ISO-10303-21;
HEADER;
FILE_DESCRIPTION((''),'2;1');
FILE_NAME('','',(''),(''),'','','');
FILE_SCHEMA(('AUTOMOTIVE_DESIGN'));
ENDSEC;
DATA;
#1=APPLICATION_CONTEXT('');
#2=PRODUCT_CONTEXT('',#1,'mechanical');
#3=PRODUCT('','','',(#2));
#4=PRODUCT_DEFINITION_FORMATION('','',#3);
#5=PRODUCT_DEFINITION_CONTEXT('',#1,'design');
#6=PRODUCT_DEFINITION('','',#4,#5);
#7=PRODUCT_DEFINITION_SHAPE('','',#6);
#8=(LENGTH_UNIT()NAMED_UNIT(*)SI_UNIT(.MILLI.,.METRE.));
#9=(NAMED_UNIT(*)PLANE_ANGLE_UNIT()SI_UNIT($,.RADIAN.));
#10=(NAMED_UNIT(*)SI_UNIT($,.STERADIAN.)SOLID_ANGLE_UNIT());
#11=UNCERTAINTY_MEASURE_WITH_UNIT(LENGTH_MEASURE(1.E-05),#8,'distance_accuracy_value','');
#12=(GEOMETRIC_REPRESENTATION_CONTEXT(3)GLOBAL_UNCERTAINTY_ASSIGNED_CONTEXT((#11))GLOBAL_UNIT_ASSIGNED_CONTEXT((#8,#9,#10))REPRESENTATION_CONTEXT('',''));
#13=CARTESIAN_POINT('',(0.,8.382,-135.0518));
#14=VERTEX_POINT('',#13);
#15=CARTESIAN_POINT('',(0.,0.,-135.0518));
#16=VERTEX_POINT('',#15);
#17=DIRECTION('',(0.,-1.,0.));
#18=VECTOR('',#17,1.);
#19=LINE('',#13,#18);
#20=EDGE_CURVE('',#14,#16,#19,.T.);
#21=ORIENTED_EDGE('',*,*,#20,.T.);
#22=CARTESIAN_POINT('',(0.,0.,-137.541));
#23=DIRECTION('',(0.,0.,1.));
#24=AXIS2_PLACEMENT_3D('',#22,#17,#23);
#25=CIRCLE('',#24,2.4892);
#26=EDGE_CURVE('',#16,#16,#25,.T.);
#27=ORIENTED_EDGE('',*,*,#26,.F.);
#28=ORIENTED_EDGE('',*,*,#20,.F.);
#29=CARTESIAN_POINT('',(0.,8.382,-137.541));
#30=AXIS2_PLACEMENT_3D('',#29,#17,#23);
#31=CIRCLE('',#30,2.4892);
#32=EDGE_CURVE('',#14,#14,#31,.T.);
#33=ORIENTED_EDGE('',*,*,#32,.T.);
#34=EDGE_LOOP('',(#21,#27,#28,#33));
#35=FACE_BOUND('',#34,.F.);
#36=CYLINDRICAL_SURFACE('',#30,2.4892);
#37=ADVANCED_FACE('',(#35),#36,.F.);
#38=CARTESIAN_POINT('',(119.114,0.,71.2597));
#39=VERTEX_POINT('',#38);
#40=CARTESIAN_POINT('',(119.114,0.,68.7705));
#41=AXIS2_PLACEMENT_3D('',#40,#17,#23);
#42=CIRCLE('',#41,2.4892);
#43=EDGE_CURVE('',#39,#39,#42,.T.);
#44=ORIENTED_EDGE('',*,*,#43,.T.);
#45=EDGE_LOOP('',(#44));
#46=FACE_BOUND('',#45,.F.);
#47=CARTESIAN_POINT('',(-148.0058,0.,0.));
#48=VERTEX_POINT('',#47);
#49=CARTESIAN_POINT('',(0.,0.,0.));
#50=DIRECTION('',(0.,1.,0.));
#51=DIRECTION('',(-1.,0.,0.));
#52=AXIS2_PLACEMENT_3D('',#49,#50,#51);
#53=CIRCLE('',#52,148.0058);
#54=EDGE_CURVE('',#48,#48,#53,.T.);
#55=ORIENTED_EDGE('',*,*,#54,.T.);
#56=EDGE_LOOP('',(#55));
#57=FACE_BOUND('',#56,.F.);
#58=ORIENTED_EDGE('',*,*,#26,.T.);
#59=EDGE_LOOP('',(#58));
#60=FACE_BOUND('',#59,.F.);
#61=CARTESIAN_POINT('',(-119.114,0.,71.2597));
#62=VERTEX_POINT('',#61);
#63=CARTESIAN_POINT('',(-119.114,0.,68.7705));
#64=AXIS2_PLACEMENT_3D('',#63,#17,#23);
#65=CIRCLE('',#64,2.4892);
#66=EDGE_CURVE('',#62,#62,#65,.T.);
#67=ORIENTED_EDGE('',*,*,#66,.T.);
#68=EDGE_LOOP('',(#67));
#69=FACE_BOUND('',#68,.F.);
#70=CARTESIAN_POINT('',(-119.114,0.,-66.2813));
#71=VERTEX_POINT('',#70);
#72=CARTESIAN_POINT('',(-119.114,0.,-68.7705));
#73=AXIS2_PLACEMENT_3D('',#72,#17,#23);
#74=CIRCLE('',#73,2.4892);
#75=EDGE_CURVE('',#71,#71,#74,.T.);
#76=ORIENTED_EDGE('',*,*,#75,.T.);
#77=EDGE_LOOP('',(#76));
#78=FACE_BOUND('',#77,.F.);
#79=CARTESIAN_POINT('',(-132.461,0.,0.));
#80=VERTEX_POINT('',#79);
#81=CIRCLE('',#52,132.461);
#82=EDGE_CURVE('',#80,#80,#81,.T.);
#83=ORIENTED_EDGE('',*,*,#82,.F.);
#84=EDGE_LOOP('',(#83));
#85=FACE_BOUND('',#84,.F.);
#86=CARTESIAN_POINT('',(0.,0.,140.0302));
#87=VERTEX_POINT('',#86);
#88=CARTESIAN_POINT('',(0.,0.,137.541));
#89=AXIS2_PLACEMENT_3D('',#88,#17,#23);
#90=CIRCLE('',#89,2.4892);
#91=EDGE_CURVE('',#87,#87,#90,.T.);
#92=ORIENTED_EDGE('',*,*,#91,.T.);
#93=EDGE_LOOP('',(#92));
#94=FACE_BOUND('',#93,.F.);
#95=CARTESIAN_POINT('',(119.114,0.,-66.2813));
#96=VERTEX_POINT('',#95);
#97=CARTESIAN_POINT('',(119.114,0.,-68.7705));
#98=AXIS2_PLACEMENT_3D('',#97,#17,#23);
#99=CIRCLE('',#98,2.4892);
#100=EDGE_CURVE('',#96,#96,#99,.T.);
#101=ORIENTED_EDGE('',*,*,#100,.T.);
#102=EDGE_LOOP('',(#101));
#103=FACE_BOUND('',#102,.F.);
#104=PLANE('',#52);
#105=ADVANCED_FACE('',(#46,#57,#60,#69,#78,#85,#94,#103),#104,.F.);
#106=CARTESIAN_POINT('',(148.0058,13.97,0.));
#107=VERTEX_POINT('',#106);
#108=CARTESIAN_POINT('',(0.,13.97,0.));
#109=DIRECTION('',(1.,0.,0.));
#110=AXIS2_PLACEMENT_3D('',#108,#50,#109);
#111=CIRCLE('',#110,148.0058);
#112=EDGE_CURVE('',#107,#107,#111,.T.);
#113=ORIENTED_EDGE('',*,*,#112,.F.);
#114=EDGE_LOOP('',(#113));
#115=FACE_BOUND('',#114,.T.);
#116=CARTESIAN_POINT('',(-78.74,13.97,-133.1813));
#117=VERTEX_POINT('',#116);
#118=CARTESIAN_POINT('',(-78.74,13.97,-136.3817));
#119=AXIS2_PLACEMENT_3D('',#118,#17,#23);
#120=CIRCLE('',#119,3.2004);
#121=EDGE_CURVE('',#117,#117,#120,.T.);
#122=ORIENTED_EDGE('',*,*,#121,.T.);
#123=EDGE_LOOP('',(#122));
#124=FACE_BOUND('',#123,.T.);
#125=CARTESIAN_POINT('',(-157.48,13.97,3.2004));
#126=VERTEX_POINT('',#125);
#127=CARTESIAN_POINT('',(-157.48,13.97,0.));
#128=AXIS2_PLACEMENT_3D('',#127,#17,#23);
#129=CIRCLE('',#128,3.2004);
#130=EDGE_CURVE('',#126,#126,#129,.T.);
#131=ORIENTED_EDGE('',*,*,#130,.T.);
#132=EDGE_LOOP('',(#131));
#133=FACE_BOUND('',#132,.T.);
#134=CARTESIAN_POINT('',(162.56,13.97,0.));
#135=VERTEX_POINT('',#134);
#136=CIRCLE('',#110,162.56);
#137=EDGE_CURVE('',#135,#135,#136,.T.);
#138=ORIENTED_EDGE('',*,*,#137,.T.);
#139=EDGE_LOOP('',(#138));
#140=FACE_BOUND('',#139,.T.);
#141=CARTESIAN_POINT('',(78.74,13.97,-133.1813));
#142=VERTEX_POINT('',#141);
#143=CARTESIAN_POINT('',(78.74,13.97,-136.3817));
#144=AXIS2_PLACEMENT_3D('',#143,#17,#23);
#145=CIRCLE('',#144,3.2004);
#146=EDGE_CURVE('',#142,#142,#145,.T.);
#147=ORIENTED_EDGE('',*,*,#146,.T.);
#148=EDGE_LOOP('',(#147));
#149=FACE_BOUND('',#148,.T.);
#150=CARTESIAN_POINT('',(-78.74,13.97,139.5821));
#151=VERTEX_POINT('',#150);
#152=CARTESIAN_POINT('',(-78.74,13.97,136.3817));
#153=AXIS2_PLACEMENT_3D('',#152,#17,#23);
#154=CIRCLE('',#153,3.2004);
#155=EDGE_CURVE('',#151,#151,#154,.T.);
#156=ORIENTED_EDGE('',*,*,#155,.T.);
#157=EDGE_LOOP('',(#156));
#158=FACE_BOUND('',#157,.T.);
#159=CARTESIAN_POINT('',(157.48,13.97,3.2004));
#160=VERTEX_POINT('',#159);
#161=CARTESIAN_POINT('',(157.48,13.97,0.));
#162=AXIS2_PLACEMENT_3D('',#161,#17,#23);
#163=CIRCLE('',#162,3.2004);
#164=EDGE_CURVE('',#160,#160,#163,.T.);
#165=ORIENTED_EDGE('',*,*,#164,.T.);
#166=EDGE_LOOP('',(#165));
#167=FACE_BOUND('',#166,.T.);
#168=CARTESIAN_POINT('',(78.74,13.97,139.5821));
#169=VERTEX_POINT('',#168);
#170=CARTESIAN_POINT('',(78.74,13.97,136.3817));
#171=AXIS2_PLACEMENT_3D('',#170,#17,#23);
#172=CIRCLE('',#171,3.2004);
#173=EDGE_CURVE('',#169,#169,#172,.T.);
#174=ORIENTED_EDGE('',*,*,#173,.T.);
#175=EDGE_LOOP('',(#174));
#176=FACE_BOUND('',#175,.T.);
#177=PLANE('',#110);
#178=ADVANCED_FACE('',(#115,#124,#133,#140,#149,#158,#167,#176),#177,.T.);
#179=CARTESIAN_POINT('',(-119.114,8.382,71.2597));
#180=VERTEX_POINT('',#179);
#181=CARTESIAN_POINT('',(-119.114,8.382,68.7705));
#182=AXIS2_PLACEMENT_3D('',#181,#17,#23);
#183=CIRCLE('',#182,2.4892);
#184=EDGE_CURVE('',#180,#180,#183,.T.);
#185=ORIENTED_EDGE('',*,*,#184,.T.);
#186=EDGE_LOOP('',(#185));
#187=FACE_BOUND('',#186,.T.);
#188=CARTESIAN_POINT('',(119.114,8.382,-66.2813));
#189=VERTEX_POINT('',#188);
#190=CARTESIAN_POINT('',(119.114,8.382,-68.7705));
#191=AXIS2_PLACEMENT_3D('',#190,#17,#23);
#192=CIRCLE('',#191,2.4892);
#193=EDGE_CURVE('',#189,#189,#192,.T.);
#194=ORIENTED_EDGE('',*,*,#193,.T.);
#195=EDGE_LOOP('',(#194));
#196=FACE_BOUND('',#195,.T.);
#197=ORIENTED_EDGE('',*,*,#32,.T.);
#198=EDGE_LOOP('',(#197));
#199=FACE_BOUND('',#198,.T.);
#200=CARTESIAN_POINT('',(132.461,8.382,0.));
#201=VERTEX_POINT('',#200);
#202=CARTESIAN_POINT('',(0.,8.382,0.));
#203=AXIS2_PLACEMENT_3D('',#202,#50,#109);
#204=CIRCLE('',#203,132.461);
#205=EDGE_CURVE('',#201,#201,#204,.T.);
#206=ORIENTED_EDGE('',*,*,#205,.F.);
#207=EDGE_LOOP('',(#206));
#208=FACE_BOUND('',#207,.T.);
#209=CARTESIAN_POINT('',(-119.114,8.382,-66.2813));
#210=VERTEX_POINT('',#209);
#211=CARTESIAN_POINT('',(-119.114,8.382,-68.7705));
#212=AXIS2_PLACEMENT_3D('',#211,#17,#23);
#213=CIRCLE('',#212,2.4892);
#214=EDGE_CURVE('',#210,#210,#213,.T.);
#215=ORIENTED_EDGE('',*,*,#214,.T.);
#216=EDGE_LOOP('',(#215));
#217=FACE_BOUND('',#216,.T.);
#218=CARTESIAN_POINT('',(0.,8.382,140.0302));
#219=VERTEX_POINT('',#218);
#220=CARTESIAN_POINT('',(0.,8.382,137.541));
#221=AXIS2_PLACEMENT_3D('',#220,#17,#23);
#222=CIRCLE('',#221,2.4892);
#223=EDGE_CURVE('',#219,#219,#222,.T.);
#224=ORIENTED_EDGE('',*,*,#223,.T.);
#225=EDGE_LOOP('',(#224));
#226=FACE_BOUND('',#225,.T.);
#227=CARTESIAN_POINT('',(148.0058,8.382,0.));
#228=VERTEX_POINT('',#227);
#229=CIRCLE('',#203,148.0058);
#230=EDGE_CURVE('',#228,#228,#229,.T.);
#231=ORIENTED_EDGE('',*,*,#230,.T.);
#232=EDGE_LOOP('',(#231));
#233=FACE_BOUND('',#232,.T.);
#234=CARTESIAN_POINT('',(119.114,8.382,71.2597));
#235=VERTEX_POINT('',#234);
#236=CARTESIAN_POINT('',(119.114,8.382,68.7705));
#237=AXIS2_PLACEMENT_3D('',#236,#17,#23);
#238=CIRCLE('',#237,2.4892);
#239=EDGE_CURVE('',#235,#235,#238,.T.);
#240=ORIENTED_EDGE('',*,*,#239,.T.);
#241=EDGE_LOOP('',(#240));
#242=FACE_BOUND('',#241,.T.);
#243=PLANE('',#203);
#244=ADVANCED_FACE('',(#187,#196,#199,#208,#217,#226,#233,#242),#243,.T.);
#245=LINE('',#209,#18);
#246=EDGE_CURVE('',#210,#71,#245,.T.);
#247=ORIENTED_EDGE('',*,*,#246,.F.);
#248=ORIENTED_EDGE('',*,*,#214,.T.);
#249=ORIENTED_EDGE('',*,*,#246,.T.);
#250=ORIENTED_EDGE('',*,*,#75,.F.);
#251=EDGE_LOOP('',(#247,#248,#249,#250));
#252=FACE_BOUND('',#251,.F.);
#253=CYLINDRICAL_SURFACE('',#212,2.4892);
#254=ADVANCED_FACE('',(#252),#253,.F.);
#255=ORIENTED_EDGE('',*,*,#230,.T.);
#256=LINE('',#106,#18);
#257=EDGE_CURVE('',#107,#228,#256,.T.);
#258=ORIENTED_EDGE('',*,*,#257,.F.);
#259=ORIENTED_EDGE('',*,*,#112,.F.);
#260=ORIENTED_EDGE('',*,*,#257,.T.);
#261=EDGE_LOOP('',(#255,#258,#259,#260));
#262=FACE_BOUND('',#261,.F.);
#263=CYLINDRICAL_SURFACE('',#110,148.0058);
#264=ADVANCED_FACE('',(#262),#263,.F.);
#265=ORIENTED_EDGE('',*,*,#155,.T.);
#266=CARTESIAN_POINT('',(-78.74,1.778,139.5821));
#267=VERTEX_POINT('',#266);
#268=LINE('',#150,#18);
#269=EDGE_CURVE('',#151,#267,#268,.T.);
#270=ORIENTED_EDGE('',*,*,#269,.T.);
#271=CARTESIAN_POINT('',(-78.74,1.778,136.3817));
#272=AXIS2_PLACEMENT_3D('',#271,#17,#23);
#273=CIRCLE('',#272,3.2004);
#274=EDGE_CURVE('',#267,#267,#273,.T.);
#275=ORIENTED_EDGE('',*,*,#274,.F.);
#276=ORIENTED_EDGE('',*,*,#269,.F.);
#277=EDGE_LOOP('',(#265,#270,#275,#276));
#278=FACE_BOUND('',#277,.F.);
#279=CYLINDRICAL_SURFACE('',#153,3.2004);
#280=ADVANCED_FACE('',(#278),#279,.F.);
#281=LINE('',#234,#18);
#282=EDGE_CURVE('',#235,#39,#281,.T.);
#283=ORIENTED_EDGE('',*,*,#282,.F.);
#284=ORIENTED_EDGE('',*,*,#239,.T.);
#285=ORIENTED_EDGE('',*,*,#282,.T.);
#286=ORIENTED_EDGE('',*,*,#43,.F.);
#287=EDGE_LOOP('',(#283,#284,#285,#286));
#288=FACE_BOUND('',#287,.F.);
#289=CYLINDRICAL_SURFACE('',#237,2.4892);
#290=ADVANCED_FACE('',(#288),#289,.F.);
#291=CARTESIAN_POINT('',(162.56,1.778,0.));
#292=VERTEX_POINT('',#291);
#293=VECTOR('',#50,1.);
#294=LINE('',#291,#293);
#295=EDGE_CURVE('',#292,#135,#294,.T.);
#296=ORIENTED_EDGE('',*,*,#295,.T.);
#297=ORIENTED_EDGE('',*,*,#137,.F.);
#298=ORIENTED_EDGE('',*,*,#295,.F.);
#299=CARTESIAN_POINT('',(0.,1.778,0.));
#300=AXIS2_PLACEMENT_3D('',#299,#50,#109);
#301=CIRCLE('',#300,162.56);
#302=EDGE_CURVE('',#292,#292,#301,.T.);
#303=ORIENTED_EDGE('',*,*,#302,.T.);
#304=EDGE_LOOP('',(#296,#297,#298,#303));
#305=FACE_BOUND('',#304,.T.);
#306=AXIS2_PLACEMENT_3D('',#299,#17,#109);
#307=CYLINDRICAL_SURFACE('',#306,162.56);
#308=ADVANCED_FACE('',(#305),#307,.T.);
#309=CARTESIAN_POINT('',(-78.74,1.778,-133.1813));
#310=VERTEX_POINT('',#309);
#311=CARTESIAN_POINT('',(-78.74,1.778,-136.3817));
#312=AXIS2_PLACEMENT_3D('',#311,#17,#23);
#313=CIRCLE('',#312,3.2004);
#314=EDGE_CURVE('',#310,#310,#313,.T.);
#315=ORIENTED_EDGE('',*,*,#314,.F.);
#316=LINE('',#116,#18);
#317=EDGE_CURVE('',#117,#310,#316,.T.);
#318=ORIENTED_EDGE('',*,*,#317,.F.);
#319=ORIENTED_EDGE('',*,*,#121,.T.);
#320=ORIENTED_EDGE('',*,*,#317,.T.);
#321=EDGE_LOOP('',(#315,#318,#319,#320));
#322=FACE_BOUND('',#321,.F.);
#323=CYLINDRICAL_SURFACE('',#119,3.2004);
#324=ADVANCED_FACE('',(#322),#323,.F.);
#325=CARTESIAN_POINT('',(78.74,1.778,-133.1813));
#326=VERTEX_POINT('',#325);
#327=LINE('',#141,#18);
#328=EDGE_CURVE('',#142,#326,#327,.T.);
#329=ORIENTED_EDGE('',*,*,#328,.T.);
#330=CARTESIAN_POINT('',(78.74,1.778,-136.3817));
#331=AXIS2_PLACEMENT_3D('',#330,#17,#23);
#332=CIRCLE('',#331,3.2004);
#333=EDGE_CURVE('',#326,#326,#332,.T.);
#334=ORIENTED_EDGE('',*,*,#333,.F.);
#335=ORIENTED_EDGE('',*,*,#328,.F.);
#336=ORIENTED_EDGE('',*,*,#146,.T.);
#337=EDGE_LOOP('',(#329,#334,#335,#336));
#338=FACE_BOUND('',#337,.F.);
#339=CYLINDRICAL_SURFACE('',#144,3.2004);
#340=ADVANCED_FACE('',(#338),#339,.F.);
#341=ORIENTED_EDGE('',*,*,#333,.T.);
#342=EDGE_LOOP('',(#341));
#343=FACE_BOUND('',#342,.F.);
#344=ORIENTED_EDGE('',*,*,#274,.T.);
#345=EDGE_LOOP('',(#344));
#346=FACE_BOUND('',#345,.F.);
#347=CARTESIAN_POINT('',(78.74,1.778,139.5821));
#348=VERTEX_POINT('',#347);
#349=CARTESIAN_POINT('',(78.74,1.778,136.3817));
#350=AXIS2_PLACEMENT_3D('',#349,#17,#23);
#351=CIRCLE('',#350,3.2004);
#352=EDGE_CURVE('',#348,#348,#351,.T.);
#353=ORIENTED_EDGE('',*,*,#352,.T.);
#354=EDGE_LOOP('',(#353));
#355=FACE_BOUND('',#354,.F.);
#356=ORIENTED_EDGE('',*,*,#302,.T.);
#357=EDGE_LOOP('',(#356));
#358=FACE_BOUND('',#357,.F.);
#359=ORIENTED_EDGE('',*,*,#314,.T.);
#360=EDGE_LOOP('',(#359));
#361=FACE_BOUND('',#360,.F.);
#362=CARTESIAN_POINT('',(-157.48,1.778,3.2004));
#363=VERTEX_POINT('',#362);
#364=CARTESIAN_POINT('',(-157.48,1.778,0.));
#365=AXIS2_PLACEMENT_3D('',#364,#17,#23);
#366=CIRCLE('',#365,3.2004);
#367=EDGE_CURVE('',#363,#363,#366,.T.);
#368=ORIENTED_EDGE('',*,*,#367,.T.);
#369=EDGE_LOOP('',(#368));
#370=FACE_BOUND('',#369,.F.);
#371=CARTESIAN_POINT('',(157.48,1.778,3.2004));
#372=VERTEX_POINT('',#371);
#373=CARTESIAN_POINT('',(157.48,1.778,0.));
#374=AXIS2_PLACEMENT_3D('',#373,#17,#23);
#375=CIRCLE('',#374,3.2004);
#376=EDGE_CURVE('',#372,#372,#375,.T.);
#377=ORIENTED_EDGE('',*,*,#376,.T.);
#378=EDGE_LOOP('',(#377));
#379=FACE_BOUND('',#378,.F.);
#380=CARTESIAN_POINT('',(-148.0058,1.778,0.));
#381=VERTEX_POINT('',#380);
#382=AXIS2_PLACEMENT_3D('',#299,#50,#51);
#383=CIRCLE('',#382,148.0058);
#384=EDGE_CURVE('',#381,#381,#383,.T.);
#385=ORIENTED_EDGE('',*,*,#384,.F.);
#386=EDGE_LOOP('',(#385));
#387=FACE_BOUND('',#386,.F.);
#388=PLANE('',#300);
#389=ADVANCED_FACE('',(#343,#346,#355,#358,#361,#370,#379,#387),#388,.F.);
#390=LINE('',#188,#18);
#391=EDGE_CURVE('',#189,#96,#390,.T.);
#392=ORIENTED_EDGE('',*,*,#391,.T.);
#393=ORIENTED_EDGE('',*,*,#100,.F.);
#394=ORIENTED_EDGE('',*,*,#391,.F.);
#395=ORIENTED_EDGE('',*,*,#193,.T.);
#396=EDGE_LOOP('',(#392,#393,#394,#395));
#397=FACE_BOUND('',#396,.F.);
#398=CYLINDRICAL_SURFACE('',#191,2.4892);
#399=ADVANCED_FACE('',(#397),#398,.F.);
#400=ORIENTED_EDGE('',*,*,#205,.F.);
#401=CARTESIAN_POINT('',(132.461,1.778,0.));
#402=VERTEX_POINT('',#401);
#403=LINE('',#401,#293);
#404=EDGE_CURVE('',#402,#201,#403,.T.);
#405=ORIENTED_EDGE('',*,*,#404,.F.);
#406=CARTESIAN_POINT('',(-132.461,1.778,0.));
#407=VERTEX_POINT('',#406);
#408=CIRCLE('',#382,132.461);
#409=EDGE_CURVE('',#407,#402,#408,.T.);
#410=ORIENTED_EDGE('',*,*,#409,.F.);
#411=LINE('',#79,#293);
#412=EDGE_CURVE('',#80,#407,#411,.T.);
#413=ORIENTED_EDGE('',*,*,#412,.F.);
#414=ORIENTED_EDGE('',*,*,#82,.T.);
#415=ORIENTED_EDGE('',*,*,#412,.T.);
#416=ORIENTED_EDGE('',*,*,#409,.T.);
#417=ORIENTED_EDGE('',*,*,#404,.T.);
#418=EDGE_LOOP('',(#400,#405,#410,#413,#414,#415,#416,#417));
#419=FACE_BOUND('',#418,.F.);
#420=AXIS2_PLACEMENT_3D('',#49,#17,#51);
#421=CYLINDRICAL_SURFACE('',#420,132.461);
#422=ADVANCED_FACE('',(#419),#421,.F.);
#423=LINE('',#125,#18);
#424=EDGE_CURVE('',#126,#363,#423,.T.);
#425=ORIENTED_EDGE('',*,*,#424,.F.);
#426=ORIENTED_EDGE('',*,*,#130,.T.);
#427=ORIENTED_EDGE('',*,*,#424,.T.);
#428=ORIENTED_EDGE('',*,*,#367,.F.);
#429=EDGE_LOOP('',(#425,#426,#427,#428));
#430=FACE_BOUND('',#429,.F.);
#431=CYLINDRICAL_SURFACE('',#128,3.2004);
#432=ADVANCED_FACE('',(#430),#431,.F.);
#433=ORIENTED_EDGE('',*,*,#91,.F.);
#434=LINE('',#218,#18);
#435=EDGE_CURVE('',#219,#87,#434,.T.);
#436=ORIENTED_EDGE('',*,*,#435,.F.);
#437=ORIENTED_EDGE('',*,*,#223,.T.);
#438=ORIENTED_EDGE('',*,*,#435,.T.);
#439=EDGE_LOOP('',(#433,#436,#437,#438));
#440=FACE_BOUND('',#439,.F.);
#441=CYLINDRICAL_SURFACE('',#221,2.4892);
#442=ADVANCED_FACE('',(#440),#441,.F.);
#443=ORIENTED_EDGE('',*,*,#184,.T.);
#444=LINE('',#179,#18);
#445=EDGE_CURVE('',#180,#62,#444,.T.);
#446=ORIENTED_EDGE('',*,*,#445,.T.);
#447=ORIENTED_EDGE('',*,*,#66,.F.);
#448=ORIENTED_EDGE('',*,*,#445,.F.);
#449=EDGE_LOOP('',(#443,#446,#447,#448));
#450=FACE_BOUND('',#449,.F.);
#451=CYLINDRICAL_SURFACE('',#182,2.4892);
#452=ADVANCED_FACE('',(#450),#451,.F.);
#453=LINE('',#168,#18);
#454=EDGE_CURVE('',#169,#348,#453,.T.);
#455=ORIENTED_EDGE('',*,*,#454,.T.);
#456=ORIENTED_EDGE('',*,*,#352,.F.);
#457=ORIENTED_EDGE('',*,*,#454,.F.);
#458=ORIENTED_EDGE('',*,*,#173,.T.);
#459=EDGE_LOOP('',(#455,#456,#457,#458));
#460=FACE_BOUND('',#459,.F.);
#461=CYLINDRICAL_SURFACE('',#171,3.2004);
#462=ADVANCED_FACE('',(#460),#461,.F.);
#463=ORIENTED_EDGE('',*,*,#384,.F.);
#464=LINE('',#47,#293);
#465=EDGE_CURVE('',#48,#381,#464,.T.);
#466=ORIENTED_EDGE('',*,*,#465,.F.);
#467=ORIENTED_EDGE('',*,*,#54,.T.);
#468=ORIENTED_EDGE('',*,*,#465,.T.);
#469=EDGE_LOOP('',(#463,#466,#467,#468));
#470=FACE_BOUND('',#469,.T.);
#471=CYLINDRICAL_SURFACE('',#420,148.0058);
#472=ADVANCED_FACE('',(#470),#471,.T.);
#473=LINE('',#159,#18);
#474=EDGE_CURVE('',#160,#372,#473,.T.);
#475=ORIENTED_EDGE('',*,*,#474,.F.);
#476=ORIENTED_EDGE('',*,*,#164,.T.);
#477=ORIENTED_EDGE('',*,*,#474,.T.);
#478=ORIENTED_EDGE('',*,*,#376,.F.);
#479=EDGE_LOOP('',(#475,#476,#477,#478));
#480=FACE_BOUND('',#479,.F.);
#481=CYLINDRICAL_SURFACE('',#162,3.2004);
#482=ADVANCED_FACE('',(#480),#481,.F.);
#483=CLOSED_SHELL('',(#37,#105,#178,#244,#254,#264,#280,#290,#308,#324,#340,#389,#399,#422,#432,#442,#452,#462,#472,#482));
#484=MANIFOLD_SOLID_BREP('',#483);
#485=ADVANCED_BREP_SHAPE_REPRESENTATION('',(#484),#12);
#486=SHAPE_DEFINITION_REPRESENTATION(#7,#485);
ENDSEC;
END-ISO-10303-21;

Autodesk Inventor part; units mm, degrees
ref_plane "YZ Plane" through (0, 0, 0) normal (1, 0, 0) x (0, 1, 0)
ref_plane "XZ Plane" through (0, 0, 0) normal (0, 1, 0) x (-1, 0, 0)
ref_plane "XY Plane" through (0, 0, 0) normal (0, 0, 1) x (1, 0, 0)
sketch "Sketch1" plane through (0, 0, 0) normal (0, 1, 0) x (-1, 0, 0)
  circle A0 centre (0, 0) radius 162.56 construction
  circle A1 centre (0, 0) radius 148.0058
  circle A2 centre (0, 0) radius 132.461
  dimension "d0" = 325.12
  dimension "d1" = 296.0116
  dimension "d2" = 264.922
extrude "Extrusion1" add sketch "Sketch1" along normal blind 1.778
sketch "Sketch2" plane through (0, 1.778, 0) normal (0, 1, 0) x (1, 0, 0)
  circle A0 centre (0, 0) radius 132.461
  circle A1 centre (0, 0) radius 162.56
  dimension "d5" = 325.12
extrude "Extrusion2" add sketch "Sketch2" along normal blind 12.192
sketch "Sketch3" plane through (0, 13.97, 0) normal (0, 1, 0) x (1, 0, 0)
  circle A0 centre (0, 0) radius 148.0058
  circle A1 centre (0, 0) radius 132.461
extrude "Extrusion3" cut sketch "Sketch3" against normal blind 5.588
sketch "Sketch4" plane through (0, 13.97, 0) normal (0, 1, 0) x (1, 0, 0)
  circle A0 centre (0, 0) radius 157.48 construction
  circle A1 centre (-157.48, 0) radius 3.9687
  circle A2 centre (-78.74, -136.3817) radius 3.9687
  circle A3 centre (78.74, -136.3817) radius 3.9687
  circle A4 centre (157.48, 0) radius 3.9687
  circle A5 centre (78.74, 136.3817) radius 3.9687
  circle A6 centre (-78.74, 136.3817) radius 3.9687
  dimension "d10" = 314.96
  dimension "d11" = 7.9375
  dimension "d14" = 360
hole "Hole1" at (-157.48, 13.97, 0) at (78.74, 13.97, -136.3817) at (-78.74, 13.97, -136.3817) at (157.48, 13.97, 0) at (78.74, 13.97, 136.3817) at (-78.74, 13.97, 136.3817) direction (0, -1, 0) diameter 6.4008 depth 22.9362 thread size "5/16-18 UNC" class "2B" standard "ANSI Unified Screw Threads"
sketch "Sketch5" plane through (0, 8.382, 0) normal (0, 1, 0) x (1, 0, 0)
  line L0 (0, 0) -> (-122.3635, 70.6466) construction
  line L1 (0, 0) -> (141.2932, 0) construction
  line L2 (-122.3635, 70.6466) -> (0, 0) construction
  line L3 (0, 0) -> (-128.1768, -74.0029) construction
  circle A0 centre (0, 0) radius 148.0058 construction
  line L4 (0, 0) -> (148.0058, 0) construction
  circle A1 centre (0, 0) radius 137.541 construction
  circle A2 centre (-119.114, -68.7705) radius 3.175
  circle A3 centre (0, -137.541) radius 3.175
  circle A4 centre (119.114, -68.7705) radius 3.175
  circle A5 centre (119.114, 68.7705) radius 3.175
  circle A6 centre (0, 137.541) radius 3.175
  circle A7 centre (-119.114, 68.7705) radius 3.175
  dimension "d25" = 275.082
  dimension "d23" = 150
  dimension "d24" = 150
  dimension "d26" = 6.35
  dimension "d29" = 360
hole "Hole2" at (0, 8.382, 137.541) at (119.114, 8.382, 68.7705) at (119.114, 8.382, -68.7705) at (0, 8.382, -137.541) at (-119.114, 8.382, -68.7705) at (-119.114, 8.382, 68.7705) direction (0, -1, 0) diameter 4.9784 depth 19.05 thread size "1/4-20 UNC" class "2B" standard "ANSI Unified Screw Threads"
properties part number "Turntable_2"
